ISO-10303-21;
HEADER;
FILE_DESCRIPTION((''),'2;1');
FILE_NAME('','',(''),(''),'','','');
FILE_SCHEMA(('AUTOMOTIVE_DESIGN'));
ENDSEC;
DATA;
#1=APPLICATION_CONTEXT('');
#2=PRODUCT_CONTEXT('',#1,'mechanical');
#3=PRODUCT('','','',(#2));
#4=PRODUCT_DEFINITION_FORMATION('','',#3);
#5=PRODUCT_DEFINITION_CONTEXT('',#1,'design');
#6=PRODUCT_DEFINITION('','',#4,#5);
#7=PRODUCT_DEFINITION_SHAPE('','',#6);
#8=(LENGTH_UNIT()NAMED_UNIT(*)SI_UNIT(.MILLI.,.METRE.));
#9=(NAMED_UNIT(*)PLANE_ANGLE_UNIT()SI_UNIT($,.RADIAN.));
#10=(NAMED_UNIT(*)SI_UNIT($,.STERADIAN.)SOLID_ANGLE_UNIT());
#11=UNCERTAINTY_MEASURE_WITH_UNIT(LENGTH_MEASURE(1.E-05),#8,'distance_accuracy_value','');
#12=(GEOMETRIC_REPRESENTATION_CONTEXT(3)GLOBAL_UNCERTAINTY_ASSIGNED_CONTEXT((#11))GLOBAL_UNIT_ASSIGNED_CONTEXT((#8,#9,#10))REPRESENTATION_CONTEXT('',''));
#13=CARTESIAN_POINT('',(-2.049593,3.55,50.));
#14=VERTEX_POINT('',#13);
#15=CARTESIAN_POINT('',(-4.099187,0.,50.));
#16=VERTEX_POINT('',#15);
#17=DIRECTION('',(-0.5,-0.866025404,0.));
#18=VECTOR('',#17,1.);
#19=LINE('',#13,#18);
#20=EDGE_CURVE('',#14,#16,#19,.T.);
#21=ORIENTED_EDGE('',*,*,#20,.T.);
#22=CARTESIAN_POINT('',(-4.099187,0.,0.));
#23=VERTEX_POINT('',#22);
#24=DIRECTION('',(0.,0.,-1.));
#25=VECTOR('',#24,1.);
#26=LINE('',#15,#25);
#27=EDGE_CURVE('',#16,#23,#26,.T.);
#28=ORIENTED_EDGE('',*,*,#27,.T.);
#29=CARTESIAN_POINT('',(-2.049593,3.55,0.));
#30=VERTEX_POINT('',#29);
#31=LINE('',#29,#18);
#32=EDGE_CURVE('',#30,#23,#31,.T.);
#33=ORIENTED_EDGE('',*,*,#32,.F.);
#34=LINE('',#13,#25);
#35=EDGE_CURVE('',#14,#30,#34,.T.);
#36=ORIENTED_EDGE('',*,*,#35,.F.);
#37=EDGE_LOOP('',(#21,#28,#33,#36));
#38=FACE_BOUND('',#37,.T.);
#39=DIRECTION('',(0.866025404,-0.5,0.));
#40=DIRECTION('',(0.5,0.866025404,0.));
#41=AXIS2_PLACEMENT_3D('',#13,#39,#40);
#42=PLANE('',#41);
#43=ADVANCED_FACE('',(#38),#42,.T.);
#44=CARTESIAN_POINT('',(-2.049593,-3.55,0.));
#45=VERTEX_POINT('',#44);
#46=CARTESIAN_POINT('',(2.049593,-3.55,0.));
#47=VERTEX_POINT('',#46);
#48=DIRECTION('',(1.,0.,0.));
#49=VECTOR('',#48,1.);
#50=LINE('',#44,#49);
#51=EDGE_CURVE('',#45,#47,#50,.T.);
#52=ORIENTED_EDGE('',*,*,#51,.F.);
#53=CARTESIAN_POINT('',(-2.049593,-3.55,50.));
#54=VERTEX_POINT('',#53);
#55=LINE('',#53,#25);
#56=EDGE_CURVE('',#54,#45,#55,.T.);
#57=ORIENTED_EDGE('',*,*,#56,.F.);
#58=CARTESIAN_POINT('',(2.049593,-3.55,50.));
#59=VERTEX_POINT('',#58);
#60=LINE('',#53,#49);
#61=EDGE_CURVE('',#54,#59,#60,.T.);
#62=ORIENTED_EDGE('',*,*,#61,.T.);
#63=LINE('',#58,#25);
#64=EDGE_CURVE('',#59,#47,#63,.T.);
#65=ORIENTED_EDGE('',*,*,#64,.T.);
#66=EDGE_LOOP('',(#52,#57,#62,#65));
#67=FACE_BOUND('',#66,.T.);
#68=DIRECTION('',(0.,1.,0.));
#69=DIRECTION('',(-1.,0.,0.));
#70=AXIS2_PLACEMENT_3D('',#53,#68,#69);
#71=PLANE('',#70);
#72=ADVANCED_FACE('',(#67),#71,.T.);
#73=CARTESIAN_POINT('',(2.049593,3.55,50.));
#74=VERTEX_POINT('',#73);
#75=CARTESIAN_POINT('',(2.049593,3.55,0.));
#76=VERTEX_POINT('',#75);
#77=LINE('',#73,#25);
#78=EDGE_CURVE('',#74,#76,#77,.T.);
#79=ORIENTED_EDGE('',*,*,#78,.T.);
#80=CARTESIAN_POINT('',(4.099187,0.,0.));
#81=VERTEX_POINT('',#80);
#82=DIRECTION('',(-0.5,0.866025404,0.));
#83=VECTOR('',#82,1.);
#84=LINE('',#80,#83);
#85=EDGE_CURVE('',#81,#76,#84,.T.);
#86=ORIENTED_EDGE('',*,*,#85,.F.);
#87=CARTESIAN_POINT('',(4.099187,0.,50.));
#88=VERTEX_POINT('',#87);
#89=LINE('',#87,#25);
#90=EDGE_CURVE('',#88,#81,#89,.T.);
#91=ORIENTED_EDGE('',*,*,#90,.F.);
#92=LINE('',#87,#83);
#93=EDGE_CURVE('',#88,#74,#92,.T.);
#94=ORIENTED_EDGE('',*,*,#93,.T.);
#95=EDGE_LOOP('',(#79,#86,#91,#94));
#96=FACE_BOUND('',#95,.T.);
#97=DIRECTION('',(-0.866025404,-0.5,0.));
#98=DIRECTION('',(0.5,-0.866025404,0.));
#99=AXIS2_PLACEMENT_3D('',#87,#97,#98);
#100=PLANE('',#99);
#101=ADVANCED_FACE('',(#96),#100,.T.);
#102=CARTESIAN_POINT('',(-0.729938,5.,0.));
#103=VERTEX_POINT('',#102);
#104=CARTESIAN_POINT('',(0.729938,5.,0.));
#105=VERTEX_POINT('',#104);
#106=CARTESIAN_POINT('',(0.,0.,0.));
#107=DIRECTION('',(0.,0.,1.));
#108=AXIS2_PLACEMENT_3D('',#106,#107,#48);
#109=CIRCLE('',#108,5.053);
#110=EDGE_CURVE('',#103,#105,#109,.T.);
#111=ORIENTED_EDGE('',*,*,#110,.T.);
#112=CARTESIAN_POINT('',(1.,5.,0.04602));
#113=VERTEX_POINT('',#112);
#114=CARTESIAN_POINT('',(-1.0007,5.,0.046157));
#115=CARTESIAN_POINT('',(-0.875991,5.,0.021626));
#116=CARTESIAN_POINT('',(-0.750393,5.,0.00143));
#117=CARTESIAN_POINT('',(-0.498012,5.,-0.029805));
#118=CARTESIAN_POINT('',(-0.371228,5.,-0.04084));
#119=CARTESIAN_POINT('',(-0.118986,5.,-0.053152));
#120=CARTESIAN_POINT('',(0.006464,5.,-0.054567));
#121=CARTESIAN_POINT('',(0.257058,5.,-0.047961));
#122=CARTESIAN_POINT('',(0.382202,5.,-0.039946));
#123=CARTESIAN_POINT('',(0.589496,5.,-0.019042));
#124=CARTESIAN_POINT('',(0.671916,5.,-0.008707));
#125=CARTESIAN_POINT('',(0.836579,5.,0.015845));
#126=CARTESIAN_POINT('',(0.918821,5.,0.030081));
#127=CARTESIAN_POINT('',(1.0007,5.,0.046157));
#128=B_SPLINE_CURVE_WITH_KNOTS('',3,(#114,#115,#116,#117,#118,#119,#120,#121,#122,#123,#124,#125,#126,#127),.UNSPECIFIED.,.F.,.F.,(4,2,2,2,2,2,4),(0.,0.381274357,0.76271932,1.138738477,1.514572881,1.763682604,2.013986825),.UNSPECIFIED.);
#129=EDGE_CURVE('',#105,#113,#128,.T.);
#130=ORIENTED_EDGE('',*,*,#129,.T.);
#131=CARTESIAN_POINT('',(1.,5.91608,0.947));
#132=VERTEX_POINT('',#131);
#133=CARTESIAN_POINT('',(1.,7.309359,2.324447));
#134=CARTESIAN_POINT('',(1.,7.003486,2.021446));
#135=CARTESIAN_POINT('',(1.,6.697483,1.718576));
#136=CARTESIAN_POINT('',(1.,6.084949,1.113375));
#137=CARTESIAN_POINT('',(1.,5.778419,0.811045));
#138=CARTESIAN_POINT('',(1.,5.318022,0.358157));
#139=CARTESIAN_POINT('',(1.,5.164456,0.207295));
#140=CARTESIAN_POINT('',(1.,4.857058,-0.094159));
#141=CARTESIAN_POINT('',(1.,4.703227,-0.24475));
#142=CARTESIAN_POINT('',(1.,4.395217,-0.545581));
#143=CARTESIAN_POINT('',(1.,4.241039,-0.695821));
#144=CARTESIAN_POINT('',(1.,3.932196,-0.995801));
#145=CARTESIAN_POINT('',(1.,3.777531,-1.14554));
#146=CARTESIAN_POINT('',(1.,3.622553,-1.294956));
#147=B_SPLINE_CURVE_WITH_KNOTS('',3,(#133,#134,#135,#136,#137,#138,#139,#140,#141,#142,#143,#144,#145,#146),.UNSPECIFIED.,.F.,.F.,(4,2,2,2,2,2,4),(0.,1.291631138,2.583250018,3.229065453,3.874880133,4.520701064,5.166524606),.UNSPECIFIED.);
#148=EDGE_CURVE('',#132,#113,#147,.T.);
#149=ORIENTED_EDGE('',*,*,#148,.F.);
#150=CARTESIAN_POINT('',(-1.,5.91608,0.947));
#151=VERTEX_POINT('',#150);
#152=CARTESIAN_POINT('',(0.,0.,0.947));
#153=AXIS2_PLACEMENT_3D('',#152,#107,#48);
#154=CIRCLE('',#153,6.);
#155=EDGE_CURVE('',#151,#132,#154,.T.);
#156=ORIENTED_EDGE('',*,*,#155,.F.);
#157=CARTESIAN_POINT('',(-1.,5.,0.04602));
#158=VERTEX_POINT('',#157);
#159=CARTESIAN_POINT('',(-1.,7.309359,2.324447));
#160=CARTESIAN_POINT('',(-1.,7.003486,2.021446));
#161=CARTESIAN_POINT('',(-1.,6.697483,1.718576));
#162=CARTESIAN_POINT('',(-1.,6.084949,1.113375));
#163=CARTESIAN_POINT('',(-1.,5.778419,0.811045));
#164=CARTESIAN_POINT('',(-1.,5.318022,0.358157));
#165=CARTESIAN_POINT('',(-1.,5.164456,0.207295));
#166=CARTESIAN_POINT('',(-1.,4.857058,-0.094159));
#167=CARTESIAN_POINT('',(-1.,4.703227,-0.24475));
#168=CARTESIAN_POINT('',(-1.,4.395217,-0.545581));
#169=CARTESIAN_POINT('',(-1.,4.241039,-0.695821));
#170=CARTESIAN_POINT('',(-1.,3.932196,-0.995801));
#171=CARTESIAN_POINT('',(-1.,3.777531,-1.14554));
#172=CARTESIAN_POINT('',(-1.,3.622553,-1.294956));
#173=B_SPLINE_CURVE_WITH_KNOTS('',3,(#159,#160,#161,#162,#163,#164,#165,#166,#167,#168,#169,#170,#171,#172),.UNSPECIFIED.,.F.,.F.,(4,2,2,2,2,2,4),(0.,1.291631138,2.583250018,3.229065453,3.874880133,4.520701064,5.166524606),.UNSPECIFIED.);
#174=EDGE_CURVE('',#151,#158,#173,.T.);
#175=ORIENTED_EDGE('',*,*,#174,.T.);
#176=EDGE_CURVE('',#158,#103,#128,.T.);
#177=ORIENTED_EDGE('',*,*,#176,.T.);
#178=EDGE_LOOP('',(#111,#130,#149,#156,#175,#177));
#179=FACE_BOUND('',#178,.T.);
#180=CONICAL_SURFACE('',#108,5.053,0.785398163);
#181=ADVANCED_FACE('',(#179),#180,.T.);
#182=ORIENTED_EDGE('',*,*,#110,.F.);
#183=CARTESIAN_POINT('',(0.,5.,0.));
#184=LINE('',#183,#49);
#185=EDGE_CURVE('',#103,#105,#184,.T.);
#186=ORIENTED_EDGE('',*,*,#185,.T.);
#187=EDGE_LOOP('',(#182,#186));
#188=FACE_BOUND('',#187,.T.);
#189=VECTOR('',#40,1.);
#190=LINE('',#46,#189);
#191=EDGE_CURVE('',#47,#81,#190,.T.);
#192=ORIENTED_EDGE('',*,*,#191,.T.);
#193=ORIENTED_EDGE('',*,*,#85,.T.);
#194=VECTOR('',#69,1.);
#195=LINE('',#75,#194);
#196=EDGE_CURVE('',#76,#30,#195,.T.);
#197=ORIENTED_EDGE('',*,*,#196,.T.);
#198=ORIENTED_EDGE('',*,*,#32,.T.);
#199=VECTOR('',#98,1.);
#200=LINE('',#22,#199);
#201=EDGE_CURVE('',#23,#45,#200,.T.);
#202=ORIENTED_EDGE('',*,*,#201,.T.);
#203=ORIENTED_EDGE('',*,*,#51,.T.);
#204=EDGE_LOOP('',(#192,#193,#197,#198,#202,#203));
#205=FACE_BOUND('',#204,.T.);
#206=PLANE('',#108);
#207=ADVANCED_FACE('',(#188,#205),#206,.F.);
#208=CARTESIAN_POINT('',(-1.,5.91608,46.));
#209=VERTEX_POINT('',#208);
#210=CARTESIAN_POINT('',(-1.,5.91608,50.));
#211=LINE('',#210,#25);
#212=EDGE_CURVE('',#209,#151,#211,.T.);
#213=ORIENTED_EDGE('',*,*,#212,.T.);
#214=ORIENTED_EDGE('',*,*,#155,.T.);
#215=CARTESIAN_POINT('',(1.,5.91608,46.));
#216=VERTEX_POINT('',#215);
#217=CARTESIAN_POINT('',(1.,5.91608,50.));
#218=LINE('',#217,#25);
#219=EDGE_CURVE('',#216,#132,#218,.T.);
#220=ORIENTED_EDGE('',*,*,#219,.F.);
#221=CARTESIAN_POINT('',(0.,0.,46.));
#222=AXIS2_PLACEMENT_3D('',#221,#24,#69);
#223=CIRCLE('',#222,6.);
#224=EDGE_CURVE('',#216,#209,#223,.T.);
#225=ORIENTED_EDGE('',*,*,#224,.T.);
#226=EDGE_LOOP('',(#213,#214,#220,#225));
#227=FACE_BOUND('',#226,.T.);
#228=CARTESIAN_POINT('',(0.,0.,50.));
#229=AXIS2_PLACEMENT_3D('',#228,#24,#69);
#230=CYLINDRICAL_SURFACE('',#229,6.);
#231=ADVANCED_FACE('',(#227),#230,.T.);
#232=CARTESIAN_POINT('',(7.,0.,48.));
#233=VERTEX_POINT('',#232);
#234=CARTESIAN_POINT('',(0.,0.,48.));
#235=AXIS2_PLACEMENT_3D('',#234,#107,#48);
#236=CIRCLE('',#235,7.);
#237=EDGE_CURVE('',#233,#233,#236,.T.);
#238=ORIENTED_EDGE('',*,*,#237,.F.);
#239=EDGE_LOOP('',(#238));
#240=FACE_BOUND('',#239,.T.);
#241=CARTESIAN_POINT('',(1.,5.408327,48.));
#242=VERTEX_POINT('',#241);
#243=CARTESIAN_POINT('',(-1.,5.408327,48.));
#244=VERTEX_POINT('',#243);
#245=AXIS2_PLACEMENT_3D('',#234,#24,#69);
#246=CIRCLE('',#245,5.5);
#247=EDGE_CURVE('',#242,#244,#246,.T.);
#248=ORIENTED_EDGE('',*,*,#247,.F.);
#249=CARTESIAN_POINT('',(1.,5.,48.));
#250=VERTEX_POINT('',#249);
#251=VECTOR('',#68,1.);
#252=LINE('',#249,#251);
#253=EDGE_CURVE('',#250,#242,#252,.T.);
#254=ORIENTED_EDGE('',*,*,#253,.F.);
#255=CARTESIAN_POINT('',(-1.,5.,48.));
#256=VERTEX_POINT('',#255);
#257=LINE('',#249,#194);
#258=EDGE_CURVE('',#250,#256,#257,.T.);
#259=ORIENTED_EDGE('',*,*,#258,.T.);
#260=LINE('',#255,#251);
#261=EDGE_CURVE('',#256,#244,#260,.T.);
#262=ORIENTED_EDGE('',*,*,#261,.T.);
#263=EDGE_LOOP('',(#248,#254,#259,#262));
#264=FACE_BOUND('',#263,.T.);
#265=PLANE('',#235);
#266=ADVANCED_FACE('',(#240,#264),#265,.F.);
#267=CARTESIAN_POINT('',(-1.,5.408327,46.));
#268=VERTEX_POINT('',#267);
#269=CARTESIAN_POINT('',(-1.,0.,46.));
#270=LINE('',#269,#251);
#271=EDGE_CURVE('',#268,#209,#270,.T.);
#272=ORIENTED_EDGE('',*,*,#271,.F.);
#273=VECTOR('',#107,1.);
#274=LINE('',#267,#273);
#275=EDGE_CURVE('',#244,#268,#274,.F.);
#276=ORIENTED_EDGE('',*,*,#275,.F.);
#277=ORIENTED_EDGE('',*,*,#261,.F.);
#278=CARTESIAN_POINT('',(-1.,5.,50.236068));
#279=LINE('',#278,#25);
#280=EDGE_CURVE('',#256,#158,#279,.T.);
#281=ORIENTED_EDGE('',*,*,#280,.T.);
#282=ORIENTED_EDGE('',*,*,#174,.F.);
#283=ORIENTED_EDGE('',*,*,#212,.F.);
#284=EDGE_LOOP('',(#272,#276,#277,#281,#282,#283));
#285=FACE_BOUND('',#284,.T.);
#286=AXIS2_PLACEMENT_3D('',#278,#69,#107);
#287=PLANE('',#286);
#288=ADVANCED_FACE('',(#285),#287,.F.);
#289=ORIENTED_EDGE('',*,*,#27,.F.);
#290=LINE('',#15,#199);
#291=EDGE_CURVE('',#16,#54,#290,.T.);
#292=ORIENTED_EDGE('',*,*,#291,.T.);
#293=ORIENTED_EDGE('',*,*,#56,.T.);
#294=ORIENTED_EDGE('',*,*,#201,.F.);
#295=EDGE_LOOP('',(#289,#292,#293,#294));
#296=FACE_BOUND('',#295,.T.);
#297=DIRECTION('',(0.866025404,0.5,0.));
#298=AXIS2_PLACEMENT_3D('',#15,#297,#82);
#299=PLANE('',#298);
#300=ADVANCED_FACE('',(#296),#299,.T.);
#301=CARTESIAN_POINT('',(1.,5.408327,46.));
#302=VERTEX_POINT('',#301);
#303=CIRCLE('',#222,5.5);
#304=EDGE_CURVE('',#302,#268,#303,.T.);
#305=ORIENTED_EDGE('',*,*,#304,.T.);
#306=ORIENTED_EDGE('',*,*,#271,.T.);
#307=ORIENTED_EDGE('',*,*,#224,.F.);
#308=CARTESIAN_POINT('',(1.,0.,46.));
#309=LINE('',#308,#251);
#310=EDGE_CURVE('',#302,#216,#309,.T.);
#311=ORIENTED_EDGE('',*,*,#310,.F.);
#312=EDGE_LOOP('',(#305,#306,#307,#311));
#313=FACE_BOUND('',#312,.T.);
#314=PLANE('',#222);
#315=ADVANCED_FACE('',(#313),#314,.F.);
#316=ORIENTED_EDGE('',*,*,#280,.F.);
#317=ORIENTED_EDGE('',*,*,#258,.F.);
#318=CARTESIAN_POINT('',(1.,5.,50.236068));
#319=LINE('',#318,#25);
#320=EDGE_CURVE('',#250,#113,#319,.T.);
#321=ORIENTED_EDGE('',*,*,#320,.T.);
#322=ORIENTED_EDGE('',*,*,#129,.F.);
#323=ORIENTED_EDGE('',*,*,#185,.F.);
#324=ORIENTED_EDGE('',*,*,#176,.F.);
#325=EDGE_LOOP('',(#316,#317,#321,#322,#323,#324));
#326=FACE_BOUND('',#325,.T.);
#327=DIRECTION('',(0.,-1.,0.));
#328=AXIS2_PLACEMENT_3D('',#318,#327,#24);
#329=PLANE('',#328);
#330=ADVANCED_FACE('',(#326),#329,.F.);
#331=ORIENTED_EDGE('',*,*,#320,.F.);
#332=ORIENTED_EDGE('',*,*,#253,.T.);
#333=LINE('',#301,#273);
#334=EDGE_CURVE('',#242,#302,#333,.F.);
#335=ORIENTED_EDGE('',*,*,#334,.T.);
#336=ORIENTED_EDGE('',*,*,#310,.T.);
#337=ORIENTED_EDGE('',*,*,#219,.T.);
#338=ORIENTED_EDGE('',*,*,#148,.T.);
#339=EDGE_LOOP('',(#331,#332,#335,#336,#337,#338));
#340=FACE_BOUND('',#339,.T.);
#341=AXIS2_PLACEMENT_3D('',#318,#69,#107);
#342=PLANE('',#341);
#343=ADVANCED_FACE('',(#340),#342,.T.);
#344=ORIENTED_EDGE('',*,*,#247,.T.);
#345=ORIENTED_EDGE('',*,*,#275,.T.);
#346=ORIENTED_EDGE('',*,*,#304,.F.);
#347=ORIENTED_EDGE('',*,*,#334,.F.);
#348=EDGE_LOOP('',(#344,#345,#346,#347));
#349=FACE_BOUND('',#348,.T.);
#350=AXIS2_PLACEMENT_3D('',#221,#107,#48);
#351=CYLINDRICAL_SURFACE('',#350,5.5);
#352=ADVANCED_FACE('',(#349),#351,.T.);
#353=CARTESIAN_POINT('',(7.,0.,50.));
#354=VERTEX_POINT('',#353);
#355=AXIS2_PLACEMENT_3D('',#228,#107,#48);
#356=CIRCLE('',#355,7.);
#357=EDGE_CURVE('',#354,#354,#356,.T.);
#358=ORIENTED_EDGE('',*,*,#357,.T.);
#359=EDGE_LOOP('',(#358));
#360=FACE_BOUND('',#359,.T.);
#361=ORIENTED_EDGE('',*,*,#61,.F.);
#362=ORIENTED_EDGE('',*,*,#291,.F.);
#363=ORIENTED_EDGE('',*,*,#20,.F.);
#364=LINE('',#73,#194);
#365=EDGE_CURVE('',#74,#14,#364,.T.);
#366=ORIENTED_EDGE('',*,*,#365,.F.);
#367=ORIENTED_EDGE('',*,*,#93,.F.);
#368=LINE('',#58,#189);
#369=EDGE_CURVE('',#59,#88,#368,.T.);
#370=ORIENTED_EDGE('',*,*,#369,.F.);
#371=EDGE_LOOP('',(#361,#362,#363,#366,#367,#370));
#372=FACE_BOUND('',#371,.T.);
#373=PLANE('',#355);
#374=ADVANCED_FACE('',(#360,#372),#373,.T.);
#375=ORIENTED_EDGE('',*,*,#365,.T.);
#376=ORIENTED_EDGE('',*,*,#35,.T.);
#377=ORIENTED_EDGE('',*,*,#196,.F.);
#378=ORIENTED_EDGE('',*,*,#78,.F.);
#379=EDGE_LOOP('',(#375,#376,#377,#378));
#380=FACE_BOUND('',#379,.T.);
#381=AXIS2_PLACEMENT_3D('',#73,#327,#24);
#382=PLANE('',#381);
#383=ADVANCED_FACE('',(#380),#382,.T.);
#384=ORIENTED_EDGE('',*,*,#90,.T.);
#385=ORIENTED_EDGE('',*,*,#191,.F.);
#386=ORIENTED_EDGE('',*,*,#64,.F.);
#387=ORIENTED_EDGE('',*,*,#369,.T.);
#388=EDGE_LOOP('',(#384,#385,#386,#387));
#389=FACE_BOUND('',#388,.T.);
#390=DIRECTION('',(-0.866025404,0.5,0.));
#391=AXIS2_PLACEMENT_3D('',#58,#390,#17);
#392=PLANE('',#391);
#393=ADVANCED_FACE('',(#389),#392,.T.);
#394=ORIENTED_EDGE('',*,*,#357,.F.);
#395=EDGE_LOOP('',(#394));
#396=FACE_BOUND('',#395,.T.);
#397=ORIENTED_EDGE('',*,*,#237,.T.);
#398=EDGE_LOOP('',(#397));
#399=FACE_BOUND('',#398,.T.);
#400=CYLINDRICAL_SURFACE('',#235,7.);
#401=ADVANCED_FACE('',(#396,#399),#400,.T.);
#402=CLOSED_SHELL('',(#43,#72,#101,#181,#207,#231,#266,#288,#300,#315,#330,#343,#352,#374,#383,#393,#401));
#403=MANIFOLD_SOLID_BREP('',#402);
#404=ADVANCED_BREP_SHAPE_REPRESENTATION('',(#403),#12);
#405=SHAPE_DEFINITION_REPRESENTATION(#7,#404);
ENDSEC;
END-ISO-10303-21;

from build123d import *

# Parameters (mm, degrees)
SKETCH_1_R                        = 6
EXTRUDE_1_DEPTH                   = 50
EXTRUDE_START                     = -2
SKETCH_2_R                        = 7
SKETCH_2_R_2                      = 6
EXTRUDE_2_DEPTH                   = 2
SKETCH_3_OUTSIDE_W                = 26.756
SKETCH_3_OUTSIDE_H                = 26.756
SKETCH_3_OUTSIDE_R                = 5.5
CUT_EXTRUDE_1_DEPTH               = 2
SKETCH_6_W                        = 2
SKETCH_6_H                        = 1
CUT_EXTRUDE_1_2_DEPTH             = 2
CUT_EXTRUDE_1_2_DIRECTION_2_REACH = 52.971


# Read off the part's stored shape, not the designer's step: M12 机械螺纹 螺柱1
with BuildPart() as part:
    # 草图1 → 凸台-拉伸1 (new body)
    with BuildSketch(Plane.XY):
        Circle(SKETCH_1_R)
        Polygon((4.099186911, 0), (2.049593456, 3.55), (-2.049593456, 3.55), (-4.099186911, 0), (-2.049593456, -3.55), (2.049593456, -3.55), align=None, mode=Mode.SUBTRACT)
    extrude(amount=EXTRUDE_1_DEPTH)

    # 草图2 → 凸台-拉伸2 (add)
    with BuildSketch(Plane.XY.offset(50).offset(EXTRUDE_START)):
        Circle(SKETCH_2_R)
        Circle(SKETCH_2_R_2, mode=Mode.SUBTRACT)
    extrude(amount=EXTRUDE_2_DEPTH)

    # 草图3 outside → Cut-Extrude 1 (cut)
    with BuildSketch(Plane(origin=(0, 0, 48), x_dir=(-1, 0, 0), z_dir=(0, 0, -1))):
        Rectangle(SKETCH_3_OUTSIDE_W, SKETCH_3_OUTSIDE_H)
        Circle(SKETCH_3_OUTSIDE_R, mode=Mode.SUBTRACT)
    extrude(amount=CUT_EXTRUDE_1_DEPTH, mode=Mode.SUBTRACT)

    # M12 机械螺纹 螺柱1 outline → M12 机械螺纹 螺柱1 (revolve, cut)
    with BuildSketch(Plane.XZ):
        Polygon((6, 0.947), (5.053, 0), (6, 0), align=None)
    revolve(axis=Axis((0, 0, 0), (0, 0, 1)), mode=Mode.SUBTRACT)

    # 草图6 → Cut-Extrude 1 2 (cut)
    with BuildSketch(Plane.XY):
        with Locations((0, 5.5)):
            Rectangle(SKETCH_6_W, SKETCH_6_H)
    extrude(amount=-CUT_EXTRUDE_1_2_DEPTH, mode=Mode.SUBTRACT)

    # Cut-Extrude 1 2 direction 2: up to this face of the body (flat: up to its plane)
    cut_extrude_1_2_direction_2_end = Plane(part.part.faces().sort_by_distance((5.697989899, 0, 48))[0])
    # 草图6 → Cut-Extrude 1 2 direction 2 (cut, up to the picked face)
    with BuildSketch(Plane.XY, mode=Mode.PRIVATE) as cut_extrude_1_2_direction_2_sk1:
        with Locations((0, 5.5)):
            Rectangle(SKETCH_6_W, SKETCH_6_H)
    cut_extrude_1_2_direction_2_tool1 = split(extrude(cut_extrude_1_2_direction_2_sk1.sketch, amount=CUT_EXTRUDE_1_2_DIRECTION_2_REACH, mode=Mode.PRIVATE), bisect_by=cut_extrude_1_2_direction_2_end, keep=Keep.BOTH, mode=Mode.PRIVATE)
    add(cut_extrude_1_2_direction_2_tool1.solids().sort_by(Axis((0, 5.5, 0), (0, 0, 1)))[0], mode=Mode.SUBTRACT)


solid = part.part
